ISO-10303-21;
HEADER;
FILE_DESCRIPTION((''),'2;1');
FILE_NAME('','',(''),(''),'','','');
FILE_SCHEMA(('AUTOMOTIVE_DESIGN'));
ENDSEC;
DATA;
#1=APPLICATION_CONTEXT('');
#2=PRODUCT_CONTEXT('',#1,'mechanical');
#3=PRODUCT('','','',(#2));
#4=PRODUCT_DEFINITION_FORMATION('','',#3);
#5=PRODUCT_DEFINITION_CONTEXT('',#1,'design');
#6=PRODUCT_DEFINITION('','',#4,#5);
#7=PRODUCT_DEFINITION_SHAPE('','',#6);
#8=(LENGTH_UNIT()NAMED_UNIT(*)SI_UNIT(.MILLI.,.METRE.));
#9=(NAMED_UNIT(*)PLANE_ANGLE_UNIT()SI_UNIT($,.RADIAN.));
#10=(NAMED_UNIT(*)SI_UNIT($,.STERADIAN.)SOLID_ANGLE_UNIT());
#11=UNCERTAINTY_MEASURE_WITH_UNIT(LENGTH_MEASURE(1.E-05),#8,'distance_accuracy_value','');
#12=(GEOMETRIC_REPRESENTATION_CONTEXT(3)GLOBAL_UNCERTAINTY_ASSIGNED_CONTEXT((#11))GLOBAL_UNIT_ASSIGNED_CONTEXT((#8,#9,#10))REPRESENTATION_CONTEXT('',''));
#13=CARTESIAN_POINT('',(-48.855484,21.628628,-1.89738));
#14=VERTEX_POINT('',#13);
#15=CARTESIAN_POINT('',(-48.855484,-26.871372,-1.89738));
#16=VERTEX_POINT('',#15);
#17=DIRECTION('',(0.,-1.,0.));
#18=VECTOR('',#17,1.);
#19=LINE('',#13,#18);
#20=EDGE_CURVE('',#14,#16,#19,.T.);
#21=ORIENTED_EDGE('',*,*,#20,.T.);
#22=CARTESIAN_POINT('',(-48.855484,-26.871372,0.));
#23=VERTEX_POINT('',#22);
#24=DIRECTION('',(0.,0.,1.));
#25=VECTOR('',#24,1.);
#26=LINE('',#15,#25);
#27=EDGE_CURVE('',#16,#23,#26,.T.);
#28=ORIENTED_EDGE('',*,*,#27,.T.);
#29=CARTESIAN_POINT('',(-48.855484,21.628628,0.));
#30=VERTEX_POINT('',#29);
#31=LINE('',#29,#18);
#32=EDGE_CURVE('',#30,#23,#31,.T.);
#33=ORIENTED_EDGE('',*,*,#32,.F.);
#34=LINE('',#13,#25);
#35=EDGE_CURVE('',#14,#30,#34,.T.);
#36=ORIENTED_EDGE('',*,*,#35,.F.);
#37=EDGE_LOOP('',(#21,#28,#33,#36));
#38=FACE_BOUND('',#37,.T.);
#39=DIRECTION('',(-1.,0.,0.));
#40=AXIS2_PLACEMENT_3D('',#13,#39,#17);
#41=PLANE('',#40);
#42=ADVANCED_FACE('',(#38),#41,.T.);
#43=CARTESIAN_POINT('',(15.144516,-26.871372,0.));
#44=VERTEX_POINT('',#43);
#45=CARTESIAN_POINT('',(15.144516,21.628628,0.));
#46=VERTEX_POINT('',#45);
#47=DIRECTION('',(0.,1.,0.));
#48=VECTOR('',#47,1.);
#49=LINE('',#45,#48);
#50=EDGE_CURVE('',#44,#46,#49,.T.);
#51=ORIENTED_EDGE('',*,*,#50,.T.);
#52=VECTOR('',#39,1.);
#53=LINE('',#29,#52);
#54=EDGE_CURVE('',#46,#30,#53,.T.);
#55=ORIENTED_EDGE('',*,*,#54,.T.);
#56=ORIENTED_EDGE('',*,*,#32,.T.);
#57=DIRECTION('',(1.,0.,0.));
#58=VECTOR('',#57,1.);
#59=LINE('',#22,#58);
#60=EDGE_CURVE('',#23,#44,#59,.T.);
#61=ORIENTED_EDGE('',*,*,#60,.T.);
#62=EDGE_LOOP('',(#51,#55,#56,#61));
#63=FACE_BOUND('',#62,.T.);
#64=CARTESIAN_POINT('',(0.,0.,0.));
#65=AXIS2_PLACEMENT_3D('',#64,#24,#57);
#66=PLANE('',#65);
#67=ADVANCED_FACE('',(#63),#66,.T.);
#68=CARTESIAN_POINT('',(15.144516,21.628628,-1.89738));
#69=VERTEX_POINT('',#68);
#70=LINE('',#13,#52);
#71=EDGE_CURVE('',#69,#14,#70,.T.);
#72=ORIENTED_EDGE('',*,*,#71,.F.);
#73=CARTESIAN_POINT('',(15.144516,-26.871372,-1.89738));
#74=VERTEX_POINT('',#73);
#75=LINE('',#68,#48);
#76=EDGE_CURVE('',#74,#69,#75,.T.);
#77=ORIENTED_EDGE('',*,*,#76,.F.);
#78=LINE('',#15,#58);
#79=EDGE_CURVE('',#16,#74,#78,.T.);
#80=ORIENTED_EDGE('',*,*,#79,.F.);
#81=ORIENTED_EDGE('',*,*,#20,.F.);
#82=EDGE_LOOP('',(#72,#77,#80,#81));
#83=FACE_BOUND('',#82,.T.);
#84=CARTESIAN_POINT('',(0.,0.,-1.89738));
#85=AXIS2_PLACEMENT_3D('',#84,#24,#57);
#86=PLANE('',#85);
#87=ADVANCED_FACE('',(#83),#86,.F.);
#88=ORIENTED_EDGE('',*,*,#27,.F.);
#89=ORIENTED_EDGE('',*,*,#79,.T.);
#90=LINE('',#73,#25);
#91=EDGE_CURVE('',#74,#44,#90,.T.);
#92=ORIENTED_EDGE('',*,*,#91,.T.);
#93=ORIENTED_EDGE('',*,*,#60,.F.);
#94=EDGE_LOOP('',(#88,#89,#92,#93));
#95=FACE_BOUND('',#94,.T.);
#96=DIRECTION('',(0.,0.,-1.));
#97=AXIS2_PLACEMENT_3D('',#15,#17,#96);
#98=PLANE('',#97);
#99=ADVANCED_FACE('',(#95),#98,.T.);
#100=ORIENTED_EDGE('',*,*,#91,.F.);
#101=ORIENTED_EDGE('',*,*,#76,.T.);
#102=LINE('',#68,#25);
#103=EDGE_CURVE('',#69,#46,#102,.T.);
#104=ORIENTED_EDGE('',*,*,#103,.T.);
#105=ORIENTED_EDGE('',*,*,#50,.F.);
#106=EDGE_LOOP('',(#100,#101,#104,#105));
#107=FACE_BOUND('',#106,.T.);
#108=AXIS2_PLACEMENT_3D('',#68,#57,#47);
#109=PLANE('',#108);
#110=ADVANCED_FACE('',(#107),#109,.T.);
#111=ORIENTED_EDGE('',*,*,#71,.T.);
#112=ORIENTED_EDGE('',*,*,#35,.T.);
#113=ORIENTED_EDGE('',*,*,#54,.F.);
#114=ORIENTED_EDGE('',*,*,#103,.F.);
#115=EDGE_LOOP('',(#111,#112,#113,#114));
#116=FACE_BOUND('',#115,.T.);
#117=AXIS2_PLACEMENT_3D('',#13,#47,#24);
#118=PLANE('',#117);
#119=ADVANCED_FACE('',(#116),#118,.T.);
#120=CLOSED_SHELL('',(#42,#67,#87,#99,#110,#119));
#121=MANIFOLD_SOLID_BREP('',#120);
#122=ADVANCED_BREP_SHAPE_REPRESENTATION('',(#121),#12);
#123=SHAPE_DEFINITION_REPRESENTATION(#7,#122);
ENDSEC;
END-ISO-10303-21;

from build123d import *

# Parameters (mm, degrees)
SKETCH1_W          = 64
SKETCH1_H          = 48.5
BASE_FLANGE1_DEPTH = 1.89738


# Sheet-metal steps are written as plain solids
with BuildPart() as part:
    # Sketch1 → Base-Flange1 (new body)
    with BuildSketch(Plane.XY):
        with Locations((-16.85548419, -2.621372257)):
            Rectangle(SKETCH1_W, SKETCH1_H)
    extrude(amount=-BASE_FLANGE1_DEPTH)


solid = part.part
